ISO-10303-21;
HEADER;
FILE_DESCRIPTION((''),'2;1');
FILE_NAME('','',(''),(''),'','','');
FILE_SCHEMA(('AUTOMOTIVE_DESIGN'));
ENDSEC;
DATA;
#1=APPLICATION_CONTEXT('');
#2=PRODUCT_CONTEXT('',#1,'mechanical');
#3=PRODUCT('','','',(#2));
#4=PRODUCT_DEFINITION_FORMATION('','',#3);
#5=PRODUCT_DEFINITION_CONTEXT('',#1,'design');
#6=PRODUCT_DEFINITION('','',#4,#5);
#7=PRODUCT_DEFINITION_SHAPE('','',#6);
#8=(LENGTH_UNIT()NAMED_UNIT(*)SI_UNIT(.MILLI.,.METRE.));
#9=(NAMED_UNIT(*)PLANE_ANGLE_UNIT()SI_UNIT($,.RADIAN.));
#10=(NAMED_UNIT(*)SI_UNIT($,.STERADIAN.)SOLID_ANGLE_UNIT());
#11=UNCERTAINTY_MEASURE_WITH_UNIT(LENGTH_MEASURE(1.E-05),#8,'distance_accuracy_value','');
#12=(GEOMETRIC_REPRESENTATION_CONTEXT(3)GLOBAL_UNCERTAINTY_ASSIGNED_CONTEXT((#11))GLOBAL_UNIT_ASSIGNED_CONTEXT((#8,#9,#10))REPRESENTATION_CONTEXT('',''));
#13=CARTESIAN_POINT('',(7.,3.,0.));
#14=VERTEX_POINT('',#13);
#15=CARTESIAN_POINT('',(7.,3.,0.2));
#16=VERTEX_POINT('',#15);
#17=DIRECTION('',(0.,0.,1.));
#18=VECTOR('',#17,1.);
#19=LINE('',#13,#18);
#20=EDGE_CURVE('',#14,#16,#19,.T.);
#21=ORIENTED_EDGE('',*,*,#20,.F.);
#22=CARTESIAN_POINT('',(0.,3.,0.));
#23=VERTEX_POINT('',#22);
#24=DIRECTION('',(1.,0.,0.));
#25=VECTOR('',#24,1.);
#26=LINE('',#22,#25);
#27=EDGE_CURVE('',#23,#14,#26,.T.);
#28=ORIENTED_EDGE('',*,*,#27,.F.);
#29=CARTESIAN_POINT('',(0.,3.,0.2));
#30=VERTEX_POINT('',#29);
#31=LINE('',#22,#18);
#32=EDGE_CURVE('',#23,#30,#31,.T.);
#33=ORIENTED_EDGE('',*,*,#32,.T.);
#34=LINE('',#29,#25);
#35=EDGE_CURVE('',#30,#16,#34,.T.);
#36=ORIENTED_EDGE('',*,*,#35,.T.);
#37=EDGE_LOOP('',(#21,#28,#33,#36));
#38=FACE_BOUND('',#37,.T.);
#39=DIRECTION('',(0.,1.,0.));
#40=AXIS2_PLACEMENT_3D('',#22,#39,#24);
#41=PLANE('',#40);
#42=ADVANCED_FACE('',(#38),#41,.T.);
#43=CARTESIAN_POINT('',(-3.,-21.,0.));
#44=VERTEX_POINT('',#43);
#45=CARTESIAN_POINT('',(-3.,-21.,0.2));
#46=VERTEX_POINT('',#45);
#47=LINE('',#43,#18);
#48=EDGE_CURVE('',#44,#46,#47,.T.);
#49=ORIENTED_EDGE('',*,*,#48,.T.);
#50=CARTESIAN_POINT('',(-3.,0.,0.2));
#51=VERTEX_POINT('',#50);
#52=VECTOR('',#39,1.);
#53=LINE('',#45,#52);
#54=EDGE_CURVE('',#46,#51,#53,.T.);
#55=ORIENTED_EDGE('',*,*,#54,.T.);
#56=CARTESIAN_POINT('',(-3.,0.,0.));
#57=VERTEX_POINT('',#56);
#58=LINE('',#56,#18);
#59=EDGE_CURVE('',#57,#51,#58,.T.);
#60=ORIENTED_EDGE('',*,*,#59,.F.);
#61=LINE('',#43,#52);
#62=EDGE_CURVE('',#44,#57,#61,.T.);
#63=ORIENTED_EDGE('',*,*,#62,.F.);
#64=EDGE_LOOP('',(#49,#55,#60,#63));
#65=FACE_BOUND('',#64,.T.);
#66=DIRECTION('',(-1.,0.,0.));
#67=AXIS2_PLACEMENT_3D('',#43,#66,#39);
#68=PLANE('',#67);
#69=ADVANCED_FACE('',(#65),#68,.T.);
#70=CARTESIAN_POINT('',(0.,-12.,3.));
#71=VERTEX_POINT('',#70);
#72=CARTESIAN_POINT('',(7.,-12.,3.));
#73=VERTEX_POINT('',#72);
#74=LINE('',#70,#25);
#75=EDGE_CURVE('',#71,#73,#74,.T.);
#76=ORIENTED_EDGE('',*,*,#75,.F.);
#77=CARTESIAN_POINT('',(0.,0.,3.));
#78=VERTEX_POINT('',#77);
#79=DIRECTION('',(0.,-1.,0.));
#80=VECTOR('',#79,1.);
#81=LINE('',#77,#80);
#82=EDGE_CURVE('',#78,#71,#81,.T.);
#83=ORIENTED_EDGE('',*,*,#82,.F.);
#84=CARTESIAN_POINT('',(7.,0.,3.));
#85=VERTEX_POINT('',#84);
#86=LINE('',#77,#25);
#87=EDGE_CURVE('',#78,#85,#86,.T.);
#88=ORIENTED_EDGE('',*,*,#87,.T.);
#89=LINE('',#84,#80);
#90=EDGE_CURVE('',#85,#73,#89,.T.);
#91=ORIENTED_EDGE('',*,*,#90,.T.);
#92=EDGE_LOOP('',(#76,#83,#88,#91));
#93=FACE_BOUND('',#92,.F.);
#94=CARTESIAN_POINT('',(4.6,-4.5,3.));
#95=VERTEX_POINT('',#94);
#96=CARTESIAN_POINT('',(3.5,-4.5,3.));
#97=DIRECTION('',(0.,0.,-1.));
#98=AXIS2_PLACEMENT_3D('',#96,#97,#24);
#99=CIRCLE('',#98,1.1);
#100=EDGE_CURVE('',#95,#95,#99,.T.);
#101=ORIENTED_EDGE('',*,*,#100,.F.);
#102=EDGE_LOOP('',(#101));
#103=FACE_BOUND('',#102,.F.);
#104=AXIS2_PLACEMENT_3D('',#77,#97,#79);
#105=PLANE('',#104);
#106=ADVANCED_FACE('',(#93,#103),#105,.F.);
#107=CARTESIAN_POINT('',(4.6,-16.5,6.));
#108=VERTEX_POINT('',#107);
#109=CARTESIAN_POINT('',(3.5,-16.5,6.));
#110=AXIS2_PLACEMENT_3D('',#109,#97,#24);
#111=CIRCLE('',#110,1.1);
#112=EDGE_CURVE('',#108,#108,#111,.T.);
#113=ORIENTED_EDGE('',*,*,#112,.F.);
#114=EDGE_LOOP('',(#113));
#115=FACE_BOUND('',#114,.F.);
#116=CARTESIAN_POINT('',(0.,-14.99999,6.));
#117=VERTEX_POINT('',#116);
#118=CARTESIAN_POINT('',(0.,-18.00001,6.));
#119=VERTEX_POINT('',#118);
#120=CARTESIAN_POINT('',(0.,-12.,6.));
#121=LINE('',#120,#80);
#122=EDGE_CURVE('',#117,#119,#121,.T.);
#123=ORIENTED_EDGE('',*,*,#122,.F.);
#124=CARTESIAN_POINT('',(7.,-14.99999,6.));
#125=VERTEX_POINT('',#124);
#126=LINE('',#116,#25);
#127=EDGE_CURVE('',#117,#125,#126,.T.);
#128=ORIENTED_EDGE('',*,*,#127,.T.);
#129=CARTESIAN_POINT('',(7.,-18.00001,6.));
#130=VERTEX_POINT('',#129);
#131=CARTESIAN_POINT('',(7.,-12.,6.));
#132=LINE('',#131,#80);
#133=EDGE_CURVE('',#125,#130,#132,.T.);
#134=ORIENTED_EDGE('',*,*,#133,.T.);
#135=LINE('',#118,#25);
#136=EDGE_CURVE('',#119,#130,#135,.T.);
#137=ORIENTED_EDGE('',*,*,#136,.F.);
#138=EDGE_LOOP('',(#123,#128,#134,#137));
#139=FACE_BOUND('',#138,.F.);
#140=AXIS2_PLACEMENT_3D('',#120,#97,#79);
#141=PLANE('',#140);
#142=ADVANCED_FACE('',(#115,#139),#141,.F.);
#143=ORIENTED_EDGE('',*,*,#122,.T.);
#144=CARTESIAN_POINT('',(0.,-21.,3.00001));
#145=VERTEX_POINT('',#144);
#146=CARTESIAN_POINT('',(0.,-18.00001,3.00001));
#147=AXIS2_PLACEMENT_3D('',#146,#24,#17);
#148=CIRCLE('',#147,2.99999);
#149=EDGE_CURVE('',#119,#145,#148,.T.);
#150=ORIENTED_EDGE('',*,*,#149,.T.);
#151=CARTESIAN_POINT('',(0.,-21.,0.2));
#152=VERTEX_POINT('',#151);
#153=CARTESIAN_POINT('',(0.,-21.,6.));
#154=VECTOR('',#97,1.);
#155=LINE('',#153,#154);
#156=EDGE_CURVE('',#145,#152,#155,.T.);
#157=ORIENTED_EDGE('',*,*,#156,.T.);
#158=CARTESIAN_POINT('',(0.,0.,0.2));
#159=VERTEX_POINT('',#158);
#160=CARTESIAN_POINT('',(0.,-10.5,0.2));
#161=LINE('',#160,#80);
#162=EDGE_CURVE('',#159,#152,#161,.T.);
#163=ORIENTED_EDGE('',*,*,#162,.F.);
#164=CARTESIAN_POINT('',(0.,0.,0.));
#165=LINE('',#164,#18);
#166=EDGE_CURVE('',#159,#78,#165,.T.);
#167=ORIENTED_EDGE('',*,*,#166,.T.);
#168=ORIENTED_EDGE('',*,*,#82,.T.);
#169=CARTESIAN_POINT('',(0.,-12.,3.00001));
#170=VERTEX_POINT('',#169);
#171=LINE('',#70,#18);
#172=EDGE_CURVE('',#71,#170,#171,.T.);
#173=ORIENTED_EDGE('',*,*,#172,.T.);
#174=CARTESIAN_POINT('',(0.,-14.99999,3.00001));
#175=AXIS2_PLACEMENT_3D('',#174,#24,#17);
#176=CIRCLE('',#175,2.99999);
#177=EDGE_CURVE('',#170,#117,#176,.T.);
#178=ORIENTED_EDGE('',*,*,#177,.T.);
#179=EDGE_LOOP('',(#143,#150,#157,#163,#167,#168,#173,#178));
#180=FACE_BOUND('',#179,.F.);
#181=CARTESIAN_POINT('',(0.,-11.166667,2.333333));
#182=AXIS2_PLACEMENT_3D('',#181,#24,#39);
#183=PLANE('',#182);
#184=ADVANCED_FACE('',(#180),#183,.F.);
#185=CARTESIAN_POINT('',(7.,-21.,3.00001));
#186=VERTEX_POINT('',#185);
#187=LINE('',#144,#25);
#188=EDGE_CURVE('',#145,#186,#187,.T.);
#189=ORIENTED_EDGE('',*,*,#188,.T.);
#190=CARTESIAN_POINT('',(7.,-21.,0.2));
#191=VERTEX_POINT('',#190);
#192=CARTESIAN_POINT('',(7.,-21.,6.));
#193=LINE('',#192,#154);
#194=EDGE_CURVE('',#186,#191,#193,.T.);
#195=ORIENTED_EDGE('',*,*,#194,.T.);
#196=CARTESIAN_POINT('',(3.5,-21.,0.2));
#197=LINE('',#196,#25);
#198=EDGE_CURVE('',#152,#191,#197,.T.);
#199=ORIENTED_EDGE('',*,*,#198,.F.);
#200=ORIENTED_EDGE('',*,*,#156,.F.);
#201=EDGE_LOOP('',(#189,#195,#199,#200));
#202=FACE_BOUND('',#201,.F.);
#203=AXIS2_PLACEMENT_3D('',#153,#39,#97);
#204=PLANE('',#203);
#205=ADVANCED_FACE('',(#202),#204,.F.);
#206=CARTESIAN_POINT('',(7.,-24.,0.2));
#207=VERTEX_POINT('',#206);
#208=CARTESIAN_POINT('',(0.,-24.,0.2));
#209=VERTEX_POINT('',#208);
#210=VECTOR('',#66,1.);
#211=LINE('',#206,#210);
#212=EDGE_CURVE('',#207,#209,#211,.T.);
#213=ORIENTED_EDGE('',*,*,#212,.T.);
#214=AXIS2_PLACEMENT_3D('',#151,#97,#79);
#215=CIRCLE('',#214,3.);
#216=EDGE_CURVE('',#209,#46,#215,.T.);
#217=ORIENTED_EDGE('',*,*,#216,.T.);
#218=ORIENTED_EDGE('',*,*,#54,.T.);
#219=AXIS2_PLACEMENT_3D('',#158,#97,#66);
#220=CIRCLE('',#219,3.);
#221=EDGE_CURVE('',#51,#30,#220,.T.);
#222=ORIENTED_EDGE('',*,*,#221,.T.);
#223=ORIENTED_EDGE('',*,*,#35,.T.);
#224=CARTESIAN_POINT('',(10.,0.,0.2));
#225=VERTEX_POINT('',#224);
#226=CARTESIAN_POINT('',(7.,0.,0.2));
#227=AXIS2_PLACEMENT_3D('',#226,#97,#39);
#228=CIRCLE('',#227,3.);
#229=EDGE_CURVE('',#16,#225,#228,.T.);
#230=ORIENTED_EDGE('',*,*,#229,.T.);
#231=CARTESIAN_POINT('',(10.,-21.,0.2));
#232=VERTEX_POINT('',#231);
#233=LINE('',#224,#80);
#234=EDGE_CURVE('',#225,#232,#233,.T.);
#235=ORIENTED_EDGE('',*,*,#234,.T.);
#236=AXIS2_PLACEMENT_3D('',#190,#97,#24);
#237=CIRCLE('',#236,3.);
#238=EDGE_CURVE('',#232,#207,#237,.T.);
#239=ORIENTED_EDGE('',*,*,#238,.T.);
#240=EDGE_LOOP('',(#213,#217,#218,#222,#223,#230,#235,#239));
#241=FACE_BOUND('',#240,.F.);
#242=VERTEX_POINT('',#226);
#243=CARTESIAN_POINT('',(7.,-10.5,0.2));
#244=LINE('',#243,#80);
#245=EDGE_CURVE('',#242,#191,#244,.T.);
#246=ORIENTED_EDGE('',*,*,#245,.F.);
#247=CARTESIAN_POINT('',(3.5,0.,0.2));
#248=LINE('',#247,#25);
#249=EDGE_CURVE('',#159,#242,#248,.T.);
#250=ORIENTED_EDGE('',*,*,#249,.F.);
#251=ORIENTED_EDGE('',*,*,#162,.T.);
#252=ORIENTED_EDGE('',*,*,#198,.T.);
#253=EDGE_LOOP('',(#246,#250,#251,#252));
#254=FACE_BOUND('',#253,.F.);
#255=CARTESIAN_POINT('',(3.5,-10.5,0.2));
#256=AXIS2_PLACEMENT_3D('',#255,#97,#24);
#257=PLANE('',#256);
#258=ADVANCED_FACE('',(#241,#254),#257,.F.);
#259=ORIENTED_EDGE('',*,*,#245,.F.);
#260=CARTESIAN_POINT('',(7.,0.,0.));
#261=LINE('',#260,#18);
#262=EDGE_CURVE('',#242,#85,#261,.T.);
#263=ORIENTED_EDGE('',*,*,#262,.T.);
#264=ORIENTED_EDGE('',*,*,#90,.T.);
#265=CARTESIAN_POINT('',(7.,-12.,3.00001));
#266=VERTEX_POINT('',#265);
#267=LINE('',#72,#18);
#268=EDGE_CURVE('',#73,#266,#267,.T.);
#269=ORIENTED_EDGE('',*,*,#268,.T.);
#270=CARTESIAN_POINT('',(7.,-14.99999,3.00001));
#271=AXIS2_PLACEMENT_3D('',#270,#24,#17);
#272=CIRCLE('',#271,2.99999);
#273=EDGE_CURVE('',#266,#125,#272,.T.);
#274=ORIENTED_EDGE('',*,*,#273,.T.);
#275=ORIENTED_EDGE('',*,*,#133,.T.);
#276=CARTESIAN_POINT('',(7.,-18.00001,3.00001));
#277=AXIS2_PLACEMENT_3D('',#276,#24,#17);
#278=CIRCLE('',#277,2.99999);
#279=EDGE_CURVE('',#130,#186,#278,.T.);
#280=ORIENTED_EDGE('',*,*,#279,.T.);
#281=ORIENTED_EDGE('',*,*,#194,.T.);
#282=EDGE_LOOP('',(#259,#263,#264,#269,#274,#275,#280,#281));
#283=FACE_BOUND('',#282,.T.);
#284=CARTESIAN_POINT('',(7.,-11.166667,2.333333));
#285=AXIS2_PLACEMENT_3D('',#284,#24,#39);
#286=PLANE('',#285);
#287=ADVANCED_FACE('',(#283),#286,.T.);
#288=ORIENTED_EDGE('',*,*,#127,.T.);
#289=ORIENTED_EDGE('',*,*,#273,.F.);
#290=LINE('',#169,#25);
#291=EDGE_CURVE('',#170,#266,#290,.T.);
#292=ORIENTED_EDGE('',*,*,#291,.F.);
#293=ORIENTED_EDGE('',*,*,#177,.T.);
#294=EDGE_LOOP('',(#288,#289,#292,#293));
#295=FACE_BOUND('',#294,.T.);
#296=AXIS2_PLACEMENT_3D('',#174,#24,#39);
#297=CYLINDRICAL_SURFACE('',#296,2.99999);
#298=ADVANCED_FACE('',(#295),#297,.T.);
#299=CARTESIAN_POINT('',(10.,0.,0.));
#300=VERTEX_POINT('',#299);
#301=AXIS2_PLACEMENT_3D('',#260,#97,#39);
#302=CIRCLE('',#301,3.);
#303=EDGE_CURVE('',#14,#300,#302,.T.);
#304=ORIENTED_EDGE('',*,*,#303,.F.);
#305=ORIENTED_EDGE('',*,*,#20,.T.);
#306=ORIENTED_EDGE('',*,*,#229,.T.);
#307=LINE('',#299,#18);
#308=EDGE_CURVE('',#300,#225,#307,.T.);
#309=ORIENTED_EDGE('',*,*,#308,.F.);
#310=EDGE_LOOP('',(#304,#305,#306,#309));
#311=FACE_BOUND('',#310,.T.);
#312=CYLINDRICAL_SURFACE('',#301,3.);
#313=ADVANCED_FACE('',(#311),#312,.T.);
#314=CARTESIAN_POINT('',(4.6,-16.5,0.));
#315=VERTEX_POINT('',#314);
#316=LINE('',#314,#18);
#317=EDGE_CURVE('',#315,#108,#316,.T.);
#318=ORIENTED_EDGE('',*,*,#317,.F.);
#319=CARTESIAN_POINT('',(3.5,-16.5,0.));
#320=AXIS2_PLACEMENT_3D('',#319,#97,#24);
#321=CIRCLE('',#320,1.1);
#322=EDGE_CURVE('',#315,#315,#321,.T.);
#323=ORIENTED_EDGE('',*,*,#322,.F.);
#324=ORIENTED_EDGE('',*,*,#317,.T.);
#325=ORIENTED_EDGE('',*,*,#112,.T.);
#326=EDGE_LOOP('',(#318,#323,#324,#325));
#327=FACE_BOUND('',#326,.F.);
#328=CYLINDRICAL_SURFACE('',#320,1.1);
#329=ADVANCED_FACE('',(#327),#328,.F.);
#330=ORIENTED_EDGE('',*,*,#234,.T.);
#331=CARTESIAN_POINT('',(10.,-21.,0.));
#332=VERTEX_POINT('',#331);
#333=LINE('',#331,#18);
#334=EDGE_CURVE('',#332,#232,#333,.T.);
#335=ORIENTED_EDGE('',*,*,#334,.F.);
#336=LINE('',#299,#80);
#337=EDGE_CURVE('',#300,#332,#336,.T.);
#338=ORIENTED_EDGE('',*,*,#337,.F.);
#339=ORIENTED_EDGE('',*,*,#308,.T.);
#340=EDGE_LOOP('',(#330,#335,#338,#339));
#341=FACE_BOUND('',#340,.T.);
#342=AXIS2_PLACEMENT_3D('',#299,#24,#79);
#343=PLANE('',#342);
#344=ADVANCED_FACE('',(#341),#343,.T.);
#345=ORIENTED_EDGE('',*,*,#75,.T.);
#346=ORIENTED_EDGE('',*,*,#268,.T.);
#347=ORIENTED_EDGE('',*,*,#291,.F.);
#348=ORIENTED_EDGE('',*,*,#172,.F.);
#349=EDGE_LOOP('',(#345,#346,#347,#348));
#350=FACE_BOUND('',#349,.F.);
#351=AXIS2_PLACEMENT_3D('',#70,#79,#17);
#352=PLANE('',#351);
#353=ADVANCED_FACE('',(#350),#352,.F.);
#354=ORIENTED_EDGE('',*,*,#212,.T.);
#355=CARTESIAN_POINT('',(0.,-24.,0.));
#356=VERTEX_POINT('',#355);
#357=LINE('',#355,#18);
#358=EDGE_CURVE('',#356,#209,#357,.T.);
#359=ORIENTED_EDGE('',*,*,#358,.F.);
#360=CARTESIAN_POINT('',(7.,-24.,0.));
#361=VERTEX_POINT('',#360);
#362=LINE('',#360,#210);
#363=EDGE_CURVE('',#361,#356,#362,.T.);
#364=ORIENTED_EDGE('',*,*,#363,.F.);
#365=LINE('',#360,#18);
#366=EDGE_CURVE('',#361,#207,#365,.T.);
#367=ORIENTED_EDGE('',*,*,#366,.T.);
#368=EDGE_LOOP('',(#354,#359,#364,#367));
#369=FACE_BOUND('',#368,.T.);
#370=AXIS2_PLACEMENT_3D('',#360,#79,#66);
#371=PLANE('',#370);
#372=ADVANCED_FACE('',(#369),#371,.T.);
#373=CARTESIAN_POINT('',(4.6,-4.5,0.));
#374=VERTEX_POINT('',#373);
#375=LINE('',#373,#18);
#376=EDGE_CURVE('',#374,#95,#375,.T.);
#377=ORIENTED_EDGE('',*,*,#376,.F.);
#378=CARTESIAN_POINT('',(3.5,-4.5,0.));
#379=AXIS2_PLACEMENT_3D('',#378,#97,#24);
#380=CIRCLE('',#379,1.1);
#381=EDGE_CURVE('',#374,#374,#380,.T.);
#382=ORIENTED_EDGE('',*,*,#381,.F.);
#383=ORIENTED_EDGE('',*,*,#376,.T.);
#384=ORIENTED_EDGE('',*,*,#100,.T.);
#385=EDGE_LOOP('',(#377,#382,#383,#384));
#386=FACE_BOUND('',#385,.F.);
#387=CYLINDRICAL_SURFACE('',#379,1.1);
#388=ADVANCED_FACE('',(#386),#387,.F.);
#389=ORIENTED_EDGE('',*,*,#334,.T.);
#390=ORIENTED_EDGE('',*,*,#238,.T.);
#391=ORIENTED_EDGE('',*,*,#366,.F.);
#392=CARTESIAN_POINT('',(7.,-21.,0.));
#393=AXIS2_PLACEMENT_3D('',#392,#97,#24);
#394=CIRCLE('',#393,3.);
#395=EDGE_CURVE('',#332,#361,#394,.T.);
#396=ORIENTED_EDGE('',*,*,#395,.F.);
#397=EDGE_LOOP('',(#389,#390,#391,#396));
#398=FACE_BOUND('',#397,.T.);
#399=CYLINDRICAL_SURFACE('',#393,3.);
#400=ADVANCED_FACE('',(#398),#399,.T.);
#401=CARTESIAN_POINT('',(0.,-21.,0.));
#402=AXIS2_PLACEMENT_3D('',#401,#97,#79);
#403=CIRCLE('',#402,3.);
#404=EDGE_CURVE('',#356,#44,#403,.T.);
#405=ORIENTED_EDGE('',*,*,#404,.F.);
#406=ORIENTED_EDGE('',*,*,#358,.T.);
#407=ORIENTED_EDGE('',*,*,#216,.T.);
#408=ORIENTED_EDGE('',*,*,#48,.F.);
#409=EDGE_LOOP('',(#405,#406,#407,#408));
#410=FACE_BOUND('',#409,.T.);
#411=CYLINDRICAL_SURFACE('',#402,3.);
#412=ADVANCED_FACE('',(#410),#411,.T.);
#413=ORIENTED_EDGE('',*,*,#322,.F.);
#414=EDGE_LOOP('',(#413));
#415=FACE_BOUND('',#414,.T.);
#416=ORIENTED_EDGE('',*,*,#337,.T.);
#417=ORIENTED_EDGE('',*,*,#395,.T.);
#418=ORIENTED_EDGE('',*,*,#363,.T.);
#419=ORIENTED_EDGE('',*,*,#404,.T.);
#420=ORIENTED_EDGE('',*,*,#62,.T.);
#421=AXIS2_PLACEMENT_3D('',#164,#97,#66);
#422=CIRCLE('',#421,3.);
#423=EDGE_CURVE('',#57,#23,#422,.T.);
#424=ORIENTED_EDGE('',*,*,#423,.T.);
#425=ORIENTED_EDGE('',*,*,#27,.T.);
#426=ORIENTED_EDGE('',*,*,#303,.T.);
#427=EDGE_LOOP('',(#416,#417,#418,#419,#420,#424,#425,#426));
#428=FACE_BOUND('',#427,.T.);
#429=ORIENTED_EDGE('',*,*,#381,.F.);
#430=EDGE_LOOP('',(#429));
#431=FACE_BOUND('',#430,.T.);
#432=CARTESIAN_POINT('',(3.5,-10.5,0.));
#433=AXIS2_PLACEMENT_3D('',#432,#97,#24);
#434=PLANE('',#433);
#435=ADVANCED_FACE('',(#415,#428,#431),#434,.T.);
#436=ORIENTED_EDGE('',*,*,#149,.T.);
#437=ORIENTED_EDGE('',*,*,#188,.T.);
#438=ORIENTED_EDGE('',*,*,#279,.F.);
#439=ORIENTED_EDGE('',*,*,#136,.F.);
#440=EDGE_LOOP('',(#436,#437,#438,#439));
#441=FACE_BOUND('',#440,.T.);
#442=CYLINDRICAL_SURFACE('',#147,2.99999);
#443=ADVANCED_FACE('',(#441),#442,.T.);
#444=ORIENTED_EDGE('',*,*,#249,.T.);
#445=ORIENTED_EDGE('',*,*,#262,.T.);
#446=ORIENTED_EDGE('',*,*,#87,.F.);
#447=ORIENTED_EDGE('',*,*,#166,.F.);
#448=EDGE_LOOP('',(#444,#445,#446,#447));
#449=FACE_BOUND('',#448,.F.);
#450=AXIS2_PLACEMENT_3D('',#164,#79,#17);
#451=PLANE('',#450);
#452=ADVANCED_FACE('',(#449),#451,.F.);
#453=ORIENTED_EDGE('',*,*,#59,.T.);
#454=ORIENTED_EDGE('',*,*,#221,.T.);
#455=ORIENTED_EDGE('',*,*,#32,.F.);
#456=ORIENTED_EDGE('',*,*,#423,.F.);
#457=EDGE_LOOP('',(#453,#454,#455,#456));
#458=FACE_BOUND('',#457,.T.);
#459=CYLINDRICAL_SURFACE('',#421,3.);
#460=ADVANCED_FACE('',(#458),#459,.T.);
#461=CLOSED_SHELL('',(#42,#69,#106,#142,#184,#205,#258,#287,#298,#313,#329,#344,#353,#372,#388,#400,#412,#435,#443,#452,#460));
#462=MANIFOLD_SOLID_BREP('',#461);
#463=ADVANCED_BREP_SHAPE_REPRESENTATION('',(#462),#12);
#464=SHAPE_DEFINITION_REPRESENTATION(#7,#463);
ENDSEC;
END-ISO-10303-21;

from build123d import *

# Parameters (mm, degrees)
F1_DEPTH = 7
F2_R     = 2.99999
F3_R     = 1.1
F4_DEPTH = 6.001
F5_W     = 7
F5_H     = 21
F6_DEPTH = 0.2


# Not quite as in the source:
# - a fillet or chamfer is up to 0.001 mm smaller than in the source, because OpenCascade refuses the exact size


with BuildPart() as f1:
    # F0 (on Right) → F1 (new body)
    with BuildSketch(Plane.YZ):
        Polygon((-21, 0), (0, 0), (0, 3), (-12, 3), (-12, 6), (-21, 6), align=None)
    extrude(amount=F1_DEPTH)

    # F2 (radius 3 in the source; OpenCascade refuses exactly that, so slightly less here)
    f2_edges = [f1.edges().sort_by_distance(p)[0] for p in [
        (3.5, -12, 6),
        (3.5, -21, 6),
    ]]
    fillet(f2_edges, radius=F2_R)

    # F3 (on face) → F4 (cut, through all)
    with BuildSketch(Plane(origin=(0, 0, 0), x_dir=(1, 0, 0), z_dir=(0, 0, -1))):
        with Locations((3.5, 16.5)):
            Circle(F3_R)
        with Locations((3.5, 4.5)):
            Circle(F3_R)
    extrude(amount=-F4_DEPTH, mode=Mode.SUBTRACT)

    # F5 (on face) → F6 (join)
    with BuildSketch(Plane(origin=(0, 0, 0), x_dir=(1, 0, 0), z_dir=(0, 0, -1))):
        with BuildLine():
            ThreePointArc((0, 24), (-2.1213203436, 23.1213203436), (-3, 21))
            Line((-3, 21), (-3, 0))
            ThreePointArc((-3, 0), (-2.1213203436, -2.1213203436), (0, -3))
            Line((0, -3), (7, -3))
            ThreePointArc((7, -3), (9.1213203436, -2.1213203436), (10, 0))
            Line((10, 0), (10, 21))
            ThreePointArc((10, 21), (9.1213203436, 23.1213203436), (7, 24))
            Line((7, 24), (0, 24))
        make_face()
        with Locations((3.5, 10.5)):
            Rectangle(F5_W, F5_H, mode=Mode.SUBTRACT)
    extrude(amount=-F6_DEPTH)


solid = f1.part
